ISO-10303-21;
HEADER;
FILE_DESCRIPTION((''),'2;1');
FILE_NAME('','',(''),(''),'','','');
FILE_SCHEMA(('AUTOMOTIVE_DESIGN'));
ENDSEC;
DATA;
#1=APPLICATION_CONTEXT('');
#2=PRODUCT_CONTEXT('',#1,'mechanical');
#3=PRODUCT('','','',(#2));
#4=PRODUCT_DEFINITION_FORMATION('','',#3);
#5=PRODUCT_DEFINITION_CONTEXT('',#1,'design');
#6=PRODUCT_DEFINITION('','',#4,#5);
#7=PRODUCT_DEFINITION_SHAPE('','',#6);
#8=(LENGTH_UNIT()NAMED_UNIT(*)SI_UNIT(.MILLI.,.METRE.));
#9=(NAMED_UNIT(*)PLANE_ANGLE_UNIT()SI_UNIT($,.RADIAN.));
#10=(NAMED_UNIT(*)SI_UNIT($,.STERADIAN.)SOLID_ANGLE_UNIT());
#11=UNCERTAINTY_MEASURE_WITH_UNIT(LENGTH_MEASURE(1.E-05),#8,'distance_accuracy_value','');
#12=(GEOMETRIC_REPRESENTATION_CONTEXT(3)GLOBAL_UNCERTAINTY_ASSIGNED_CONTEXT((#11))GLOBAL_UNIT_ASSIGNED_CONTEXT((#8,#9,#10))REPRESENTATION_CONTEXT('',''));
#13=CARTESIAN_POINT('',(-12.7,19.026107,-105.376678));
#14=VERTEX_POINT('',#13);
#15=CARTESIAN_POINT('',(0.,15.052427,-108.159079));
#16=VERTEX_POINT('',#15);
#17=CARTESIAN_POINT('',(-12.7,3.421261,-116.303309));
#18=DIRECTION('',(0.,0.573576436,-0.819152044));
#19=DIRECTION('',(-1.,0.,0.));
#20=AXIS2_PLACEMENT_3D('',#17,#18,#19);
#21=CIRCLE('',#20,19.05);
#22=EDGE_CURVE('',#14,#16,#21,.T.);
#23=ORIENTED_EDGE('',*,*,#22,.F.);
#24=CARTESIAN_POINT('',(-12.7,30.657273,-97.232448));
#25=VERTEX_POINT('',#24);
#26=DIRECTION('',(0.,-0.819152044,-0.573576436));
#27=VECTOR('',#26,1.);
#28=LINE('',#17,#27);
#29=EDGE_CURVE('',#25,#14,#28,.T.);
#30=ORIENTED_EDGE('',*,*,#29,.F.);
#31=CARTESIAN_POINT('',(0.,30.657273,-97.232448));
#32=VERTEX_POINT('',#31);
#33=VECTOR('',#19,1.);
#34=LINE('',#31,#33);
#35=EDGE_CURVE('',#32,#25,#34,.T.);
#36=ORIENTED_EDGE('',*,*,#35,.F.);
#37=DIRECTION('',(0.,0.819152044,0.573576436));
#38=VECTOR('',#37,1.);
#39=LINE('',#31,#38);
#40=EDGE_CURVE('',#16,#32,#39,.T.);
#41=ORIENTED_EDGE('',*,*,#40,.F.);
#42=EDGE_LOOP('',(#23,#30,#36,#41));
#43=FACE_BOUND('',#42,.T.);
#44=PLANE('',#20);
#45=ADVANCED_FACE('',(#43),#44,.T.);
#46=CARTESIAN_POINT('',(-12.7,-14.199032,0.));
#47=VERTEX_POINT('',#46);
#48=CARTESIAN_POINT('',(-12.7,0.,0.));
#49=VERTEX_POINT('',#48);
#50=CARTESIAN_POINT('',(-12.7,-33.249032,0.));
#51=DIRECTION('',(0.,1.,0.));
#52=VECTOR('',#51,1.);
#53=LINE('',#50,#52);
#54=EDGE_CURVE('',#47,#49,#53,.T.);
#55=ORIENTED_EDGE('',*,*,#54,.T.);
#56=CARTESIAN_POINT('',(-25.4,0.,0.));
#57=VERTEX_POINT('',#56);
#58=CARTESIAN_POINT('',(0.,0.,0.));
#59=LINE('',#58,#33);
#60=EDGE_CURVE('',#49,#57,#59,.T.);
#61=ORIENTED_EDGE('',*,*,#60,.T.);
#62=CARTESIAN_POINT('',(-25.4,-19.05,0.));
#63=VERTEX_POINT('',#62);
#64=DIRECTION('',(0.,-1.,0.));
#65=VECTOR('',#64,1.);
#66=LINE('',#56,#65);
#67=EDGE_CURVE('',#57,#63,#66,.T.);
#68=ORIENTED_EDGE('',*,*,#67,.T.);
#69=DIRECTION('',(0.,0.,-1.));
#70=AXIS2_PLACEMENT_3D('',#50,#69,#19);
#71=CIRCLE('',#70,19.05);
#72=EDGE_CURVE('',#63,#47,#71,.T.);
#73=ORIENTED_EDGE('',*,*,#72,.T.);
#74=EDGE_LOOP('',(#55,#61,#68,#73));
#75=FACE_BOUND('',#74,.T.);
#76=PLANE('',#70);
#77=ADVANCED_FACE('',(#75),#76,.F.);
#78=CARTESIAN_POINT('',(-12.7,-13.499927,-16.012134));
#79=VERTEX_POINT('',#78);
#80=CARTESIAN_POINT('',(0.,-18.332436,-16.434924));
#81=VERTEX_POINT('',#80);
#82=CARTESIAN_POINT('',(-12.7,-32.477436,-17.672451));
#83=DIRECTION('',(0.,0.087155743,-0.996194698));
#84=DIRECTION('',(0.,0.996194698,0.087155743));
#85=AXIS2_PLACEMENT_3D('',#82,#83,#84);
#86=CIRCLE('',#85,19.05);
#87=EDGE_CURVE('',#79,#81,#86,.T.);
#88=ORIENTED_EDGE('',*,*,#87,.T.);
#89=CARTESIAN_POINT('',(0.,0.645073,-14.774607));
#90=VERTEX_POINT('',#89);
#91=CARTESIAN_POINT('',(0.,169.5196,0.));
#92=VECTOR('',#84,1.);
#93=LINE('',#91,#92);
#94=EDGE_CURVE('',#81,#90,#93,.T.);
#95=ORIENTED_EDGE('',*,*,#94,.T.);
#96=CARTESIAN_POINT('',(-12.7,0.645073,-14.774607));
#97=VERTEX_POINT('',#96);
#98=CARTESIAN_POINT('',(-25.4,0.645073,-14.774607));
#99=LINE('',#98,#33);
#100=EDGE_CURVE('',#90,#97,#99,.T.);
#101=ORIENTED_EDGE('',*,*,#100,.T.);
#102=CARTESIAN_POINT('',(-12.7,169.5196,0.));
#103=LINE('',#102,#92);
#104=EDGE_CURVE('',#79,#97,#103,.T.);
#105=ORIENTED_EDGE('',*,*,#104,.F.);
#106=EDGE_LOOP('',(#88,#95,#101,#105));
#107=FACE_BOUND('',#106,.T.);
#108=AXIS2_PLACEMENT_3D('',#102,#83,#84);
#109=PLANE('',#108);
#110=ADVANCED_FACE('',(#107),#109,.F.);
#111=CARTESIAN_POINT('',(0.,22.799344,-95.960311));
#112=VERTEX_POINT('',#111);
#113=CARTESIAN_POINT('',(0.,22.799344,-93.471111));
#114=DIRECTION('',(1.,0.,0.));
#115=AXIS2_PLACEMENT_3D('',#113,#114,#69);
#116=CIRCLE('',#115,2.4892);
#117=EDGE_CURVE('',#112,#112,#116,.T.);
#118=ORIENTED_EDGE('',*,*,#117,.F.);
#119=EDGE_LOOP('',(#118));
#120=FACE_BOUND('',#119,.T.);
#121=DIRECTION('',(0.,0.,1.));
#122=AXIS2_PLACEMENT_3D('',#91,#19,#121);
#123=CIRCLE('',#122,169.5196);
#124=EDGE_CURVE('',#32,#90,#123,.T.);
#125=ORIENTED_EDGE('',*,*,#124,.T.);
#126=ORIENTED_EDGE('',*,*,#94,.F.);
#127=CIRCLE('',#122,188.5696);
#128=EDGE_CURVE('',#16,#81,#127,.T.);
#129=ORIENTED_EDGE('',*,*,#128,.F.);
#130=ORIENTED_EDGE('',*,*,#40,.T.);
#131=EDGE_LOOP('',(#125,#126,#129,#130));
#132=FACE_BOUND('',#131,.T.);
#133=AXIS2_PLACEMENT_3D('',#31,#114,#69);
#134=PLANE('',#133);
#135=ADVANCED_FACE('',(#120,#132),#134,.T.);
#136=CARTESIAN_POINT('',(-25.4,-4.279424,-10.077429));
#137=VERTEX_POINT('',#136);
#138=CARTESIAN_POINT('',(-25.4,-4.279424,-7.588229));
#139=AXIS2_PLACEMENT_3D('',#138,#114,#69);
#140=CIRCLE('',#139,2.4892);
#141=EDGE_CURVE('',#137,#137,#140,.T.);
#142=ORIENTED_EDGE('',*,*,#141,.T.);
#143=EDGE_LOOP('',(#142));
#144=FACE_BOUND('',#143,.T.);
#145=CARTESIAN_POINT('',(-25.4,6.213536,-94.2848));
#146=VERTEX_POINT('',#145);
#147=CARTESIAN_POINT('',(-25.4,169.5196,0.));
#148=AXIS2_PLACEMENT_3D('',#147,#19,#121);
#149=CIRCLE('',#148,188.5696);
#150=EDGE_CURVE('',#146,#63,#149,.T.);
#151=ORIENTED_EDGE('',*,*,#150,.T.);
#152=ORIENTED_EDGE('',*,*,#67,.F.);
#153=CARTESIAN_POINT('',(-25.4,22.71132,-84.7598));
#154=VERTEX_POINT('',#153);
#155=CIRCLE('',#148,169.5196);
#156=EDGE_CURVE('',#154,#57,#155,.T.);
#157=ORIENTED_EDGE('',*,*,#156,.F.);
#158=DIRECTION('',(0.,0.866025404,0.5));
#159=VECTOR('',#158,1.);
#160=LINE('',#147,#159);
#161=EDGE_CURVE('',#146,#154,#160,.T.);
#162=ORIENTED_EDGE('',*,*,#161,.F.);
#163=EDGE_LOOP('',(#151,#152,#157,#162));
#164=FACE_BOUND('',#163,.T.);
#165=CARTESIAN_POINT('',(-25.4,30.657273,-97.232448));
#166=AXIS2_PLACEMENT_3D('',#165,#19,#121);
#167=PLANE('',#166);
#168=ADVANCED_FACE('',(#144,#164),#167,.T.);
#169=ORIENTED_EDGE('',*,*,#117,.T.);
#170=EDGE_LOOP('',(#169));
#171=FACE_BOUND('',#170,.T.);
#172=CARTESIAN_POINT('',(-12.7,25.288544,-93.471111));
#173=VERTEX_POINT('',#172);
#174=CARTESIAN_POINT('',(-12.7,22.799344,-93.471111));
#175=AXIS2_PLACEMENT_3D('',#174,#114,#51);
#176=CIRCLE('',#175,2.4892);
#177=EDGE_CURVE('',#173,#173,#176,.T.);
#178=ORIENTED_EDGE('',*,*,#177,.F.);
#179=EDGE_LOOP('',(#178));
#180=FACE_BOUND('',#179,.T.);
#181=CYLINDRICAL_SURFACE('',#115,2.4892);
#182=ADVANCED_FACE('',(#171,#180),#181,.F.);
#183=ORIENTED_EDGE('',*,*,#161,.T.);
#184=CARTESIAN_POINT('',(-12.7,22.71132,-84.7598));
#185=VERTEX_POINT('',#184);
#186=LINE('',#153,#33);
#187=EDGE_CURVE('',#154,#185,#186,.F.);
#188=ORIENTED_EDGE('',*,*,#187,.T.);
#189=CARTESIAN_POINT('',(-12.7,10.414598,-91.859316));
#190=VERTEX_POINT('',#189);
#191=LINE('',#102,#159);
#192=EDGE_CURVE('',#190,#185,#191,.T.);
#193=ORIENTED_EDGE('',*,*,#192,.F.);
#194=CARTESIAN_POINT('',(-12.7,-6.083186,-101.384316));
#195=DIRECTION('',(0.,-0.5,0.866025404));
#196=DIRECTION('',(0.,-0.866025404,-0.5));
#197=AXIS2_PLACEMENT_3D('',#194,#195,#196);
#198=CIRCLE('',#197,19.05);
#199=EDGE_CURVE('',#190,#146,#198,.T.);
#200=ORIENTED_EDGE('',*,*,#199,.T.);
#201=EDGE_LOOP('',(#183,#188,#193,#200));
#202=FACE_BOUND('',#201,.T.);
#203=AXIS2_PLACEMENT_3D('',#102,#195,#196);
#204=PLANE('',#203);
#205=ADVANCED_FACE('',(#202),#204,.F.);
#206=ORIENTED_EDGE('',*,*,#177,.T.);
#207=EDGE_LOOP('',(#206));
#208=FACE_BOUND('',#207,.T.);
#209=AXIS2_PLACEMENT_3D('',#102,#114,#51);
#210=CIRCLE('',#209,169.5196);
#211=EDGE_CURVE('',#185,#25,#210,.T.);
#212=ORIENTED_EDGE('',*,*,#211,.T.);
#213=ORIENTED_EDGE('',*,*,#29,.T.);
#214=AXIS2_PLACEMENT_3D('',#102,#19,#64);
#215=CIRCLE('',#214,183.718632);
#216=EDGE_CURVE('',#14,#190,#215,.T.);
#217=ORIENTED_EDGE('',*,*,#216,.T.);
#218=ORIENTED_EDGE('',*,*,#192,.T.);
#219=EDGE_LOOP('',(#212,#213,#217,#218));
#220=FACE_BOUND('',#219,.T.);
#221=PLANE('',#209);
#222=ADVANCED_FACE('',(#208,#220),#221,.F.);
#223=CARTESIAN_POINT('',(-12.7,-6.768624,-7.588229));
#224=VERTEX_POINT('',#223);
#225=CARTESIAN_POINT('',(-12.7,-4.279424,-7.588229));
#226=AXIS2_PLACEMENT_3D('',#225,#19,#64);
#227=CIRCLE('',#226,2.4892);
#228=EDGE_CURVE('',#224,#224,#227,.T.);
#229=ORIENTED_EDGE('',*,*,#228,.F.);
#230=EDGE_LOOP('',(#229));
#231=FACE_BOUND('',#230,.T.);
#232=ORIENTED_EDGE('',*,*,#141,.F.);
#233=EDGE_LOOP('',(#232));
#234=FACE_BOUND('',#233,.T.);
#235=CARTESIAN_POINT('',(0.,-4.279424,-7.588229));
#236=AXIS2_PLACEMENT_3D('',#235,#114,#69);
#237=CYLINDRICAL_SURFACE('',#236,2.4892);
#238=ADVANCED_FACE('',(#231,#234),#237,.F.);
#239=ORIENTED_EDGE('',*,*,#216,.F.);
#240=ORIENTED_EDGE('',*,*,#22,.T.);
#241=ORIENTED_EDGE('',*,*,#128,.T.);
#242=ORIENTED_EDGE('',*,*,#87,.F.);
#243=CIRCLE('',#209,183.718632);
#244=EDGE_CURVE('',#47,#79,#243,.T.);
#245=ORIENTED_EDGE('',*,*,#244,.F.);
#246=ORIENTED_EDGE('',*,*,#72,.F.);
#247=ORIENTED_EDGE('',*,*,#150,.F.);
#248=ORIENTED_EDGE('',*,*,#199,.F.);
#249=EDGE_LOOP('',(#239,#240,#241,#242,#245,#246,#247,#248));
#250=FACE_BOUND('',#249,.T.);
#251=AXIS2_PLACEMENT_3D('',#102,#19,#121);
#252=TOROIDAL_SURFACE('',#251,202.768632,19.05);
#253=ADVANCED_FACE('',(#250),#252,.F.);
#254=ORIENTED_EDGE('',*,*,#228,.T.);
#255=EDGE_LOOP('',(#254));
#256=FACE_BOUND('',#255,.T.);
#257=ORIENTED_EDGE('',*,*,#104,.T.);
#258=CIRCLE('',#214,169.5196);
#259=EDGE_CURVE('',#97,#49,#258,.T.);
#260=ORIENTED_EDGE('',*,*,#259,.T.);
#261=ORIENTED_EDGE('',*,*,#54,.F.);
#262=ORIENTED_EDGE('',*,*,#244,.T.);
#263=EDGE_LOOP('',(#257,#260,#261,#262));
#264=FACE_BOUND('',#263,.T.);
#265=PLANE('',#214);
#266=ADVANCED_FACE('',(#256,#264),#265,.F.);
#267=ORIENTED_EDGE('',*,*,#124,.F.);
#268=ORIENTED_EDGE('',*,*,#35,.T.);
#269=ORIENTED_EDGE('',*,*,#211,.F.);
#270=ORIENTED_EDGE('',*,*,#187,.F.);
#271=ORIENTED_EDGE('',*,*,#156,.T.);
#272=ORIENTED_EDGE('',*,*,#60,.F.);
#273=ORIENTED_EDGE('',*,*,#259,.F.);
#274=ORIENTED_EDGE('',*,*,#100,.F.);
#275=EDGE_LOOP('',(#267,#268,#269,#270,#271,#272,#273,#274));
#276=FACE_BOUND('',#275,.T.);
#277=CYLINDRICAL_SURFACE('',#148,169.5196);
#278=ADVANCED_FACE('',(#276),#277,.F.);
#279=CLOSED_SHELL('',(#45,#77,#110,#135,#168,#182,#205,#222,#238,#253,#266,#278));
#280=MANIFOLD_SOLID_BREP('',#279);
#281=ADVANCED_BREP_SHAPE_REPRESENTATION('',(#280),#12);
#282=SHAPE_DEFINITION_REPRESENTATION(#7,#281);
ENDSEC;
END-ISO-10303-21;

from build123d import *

# Parameters (mm, degrees)
REVOLVE1_ANGLE             = 35
CUT_EXTRUDE1_DEPTH         = 12.7
CUT_EXTRUDE2_DEPTH         = 12.7
F_9_0_196_DIAMETER_HOLE1_D = 4.9784


with BuildPart() as part:
    # Sketch1 → Revolve1 (revolve)
    with BuildSketch(Plane(origin=(0, 0, 0), x_dir=(0, 1, 0), z_dir=(0, 0, 1))):
        with BuildLine():
            Line((0, 0), (0, 25.4))
            Line((0, 25.4), (-19.05, 25.4))
            ThreePointArc((-19.05, 25.4), (-14.199031657, 12.7), (-19.05, 0))
            Line((-19.05, 0), (0, 0))
        make_face()
    revolve(axis=Axis((-25.4, 169.5196, 0), (1, 0, 0)), revolution_arc=REVOLVE1_ANGLE)

    # Sketch2 → Cut-Extrude1 (cut)
    with BuildSketch(Plane.YZ):
        with BuildLine():
            Line((-19.05, 0), (169.5196, 0))
            Line((169.5196, 0), (-18.332435741, -16.434923548))
            ThreePointArc((-18.332435741, -16.434923548), (-18.870523524, -8.225290428), (-19.05, 0))
        make_face()
    extrude(amount=-CUT_EXTRUDE1_DEPTH, mode=Mode.SUBTRACT)

    # Sketch3 → Cut-Extrude2 (cut)
    with BuildSketch(Plane(origin=(-25.4, 0, 0), x_dir=(0, -1, 0), z_dir=(-1, 0, 0))):
        with BuildLine():
            Line((-15.052426669, -108.159079172), (-169.5196, 0))
            Line((-169.5196, 0), (-6.213536019, -94.2848))
            ThreePointArc((-6.213536019, -94.2848), (-10.48161242, -101.318372226), (-15.052426669, -108.159079172))
        make_face()
    extrude(amount=-CUT_EXTRUDE2_DEPTH, mode=Mode.SUBTRACT)

    # #9 (0.196) Diameter Hole1 (through all)
    with Locations(Plane.YZ):
        with Locations((22.799344486, -93.471111446), (-4.279424248, -7.588229275)):
            Hole(F_9_0_196_DIAMETER_HOLE1_D / 2)


solid = part.part
